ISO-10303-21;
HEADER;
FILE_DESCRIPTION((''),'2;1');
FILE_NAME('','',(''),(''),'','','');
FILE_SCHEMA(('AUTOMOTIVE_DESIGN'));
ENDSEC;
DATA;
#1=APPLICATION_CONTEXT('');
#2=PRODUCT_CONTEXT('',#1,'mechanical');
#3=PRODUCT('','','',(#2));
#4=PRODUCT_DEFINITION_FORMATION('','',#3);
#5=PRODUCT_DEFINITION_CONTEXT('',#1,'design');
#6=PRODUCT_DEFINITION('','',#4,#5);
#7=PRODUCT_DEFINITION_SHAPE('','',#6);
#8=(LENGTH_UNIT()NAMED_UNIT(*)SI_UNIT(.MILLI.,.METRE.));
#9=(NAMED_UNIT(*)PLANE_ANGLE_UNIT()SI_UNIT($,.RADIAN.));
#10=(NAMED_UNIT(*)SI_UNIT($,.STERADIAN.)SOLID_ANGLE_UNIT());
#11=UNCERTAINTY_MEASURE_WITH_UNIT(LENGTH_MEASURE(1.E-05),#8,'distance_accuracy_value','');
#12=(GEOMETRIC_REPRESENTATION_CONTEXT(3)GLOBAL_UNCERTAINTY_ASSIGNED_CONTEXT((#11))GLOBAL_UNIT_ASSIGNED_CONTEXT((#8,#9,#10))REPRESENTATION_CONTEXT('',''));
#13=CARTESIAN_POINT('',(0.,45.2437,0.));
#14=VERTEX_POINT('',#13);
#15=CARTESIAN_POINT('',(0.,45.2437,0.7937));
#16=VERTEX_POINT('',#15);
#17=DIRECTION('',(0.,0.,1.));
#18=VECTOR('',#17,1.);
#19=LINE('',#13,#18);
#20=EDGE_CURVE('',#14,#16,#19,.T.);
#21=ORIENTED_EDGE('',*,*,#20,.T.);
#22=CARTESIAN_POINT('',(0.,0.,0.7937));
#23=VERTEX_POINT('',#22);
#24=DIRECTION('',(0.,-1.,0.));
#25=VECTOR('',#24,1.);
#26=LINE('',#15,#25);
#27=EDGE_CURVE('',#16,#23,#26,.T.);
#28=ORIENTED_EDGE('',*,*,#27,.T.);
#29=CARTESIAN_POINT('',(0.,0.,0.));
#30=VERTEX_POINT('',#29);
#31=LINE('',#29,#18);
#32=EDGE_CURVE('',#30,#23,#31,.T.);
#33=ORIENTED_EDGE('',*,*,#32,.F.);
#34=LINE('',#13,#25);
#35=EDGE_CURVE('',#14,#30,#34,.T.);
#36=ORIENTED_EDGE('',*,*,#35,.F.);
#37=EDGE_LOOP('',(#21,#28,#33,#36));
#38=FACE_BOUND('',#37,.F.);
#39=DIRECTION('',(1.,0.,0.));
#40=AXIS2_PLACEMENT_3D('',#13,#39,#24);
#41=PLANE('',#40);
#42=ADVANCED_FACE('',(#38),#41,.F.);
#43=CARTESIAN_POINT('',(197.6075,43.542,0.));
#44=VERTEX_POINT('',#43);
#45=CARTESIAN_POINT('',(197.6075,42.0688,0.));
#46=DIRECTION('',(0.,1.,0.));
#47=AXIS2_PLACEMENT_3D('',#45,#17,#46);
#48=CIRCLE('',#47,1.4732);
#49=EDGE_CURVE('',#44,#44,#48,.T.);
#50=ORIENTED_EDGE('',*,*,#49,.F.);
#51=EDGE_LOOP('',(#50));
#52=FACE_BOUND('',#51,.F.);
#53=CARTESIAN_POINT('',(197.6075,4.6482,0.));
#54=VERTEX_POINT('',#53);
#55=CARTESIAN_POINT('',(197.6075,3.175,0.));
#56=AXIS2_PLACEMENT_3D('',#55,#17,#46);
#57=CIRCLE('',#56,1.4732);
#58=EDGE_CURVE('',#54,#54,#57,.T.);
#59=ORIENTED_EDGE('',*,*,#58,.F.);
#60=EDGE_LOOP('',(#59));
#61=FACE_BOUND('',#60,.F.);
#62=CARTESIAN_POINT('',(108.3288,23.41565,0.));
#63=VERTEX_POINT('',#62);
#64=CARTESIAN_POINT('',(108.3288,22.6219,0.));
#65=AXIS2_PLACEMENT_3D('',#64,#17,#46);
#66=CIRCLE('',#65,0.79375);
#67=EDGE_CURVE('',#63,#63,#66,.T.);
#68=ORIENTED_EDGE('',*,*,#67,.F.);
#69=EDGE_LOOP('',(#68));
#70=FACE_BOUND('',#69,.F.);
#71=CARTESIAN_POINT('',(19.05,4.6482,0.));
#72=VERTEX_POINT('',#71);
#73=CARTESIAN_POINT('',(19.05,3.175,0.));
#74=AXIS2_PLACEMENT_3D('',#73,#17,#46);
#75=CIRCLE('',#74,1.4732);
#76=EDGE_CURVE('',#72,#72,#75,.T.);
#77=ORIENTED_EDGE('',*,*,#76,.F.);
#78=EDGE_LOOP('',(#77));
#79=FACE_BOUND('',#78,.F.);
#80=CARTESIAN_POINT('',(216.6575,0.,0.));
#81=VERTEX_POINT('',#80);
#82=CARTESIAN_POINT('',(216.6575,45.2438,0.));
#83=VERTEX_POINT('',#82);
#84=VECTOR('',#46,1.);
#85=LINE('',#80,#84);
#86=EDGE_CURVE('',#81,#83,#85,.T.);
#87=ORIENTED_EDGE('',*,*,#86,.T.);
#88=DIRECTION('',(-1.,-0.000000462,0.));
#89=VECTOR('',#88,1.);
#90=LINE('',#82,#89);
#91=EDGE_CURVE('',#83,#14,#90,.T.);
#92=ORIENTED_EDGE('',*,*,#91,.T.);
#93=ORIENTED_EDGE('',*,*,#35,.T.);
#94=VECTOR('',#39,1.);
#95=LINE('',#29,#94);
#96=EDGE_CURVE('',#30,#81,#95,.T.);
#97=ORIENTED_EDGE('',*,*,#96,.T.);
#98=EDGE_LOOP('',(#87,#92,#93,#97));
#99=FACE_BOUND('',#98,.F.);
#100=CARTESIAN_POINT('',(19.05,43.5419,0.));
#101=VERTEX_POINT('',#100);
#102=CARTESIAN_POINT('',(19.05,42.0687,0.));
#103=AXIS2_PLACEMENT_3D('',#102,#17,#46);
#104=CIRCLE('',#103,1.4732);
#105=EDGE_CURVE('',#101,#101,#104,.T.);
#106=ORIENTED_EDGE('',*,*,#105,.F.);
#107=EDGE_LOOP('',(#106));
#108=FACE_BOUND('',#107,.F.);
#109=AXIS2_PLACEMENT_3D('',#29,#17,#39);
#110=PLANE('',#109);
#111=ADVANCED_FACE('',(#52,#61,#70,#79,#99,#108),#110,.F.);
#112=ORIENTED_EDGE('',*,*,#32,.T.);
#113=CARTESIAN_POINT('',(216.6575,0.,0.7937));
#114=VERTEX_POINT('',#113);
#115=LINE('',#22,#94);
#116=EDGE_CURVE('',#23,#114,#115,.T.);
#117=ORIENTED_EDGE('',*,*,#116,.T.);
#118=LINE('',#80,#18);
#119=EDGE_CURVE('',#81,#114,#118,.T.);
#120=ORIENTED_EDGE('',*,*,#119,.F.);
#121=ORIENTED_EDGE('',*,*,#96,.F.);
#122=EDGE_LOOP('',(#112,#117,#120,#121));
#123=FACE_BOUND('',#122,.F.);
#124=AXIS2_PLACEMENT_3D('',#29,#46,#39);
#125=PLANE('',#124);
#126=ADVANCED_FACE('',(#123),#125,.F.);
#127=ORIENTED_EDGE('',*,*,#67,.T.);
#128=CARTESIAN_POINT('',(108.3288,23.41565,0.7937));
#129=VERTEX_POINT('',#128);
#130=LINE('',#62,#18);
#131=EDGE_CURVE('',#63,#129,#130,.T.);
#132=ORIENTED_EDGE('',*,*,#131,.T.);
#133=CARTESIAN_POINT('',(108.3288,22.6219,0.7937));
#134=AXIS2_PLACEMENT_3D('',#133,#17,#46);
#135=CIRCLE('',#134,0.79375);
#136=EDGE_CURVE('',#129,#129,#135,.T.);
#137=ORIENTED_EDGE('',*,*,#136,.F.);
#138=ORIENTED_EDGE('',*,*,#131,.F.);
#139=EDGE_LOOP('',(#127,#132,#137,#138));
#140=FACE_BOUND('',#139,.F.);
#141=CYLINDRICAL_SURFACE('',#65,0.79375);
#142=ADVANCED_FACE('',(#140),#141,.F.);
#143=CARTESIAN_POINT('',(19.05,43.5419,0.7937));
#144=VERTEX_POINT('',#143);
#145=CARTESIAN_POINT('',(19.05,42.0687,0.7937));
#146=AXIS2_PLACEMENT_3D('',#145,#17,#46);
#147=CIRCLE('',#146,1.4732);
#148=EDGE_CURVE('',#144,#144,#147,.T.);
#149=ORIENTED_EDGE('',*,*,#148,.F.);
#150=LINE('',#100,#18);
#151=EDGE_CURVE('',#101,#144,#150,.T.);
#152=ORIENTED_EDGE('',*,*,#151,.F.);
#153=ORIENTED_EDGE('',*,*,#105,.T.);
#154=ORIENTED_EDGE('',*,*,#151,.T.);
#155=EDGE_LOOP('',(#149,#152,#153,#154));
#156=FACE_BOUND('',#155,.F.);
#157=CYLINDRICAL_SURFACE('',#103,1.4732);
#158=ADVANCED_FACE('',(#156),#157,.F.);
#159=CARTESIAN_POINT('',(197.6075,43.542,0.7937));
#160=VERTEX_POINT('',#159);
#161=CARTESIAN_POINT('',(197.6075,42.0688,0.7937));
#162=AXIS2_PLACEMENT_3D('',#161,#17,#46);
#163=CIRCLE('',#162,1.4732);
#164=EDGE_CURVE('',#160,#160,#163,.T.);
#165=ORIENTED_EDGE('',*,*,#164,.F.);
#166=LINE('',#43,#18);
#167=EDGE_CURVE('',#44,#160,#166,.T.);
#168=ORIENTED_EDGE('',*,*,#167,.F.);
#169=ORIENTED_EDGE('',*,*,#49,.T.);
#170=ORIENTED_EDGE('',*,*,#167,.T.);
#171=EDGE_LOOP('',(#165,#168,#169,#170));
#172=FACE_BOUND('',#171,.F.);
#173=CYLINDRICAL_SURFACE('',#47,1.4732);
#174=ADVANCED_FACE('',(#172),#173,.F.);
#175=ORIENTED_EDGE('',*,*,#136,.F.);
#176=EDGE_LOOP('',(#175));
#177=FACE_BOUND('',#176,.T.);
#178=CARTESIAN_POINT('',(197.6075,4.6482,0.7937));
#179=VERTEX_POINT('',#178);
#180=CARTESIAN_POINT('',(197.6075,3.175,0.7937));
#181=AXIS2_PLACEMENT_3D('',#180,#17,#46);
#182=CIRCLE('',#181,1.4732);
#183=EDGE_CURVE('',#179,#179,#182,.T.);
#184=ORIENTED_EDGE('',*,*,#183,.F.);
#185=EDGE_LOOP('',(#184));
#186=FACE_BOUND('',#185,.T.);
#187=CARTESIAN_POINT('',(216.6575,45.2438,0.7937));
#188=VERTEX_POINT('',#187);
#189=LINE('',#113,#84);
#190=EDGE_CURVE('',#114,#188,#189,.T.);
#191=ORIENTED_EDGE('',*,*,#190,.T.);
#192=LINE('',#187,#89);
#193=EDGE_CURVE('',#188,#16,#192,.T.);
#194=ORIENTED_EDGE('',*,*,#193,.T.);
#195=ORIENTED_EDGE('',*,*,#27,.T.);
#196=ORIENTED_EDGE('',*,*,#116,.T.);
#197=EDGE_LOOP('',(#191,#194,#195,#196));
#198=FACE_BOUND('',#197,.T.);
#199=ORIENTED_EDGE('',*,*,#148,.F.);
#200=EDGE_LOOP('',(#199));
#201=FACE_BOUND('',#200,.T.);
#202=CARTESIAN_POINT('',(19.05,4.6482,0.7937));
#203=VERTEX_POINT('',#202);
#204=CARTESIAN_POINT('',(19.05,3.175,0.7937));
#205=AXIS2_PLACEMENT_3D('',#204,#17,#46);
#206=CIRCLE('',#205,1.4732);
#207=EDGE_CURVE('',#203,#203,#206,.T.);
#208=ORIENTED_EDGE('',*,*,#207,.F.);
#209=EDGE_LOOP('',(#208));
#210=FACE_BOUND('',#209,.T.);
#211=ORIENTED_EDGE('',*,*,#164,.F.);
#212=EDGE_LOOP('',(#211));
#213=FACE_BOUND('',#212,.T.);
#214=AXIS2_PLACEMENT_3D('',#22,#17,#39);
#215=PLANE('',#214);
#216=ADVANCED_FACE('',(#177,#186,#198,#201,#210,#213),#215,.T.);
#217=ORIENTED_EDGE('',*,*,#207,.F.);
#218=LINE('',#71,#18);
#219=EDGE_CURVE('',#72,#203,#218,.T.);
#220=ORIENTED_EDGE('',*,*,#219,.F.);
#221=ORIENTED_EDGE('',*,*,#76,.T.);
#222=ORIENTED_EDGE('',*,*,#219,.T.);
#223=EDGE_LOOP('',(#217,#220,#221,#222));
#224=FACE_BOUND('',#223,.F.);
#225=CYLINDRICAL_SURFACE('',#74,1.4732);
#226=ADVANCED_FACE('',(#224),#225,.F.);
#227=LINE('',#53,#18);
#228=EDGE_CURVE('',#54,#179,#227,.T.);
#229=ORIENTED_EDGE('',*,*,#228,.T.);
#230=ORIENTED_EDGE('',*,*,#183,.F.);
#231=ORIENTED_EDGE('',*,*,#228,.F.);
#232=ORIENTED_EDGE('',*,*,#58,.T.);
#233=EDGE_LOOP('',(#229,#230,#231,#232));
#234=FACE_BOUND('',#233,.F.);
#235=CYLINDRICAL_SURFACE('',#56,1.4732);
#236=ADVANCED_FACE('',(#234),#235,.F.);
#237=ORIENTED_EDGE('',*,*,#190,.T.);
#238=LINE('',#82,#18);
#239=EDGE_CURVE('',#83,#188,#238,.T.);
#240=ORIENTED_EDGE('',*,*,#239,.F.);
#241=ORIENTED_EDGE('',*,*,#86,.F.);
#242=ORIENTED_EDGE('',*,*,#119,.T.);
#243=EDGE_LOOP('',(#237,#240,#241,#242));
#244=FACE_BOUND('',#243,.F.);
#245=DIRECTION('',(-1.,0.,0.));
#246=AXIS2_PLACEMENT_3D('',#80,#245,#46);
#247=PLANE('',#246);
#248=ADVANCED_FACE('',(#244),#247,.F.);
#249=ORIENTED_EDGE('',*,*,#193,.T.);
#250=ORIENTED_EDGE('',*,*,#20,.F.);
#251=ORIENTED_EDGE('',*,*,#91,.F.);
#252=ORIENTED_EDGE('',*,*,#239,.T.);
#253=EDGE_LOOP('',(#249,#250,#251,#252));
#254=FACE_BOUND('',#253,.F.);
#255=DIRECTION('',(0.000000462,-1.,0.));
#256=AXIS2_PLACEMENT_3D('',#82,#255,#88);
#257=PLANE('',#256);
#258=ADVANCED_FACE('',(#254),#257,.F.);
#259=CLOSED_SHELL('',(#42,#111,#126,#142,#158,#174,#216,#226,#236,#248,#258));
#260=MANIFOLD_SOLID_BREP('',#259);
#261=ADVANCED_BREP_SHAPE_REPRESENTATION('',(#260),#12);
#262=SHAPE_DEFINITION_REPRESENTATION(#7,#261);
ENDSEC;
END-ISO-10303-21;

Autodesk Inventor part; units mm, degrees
ref_plane "YZ Plane" through (0, 0, 0) normal (1, 0, 0) x (0, 1, 0)
ref_plane "XZ Plane" through (0, 0, 0) normal (0, 1, 0) x (-1, 0, 0)
ref_plane "XY Plane" through (0, 0, 0) normal (0, 0, 1) x (1, 0, 0)
sketch "Sketch1" plane through (0, 0, 0) normal (0, 0, 1) x (1, 0, 0)
  line L0 (0, 0) -> (216.6575, 0)
  line L1 (216.6575, 0) -> (216.6575, 45.2438)
  line L2 (216.6575, 45.2438) -> (0, 45.2437)
  line L3 (0, 45.2437) -> (0, 0)
  dimension "d0" = 216.6575
  dimension "d1" = 45.2437
extrude "Plate1" add sketch "Sketch1" along normal blind 0.7937
sketch "Sketch2" plane through (0, 0, 0) normal (0, 0, -1) x (-1, 0, 0)
  line L0 (0, 0) -> (-216.6575, 0) projected
  line L1 (0, 45.2437) -> (0, 0) projected
  line L2 (-216.6575, 45.2438) -> (0, 45.2437) projected
  line L3 (-216.6575, 0) -> (-216.6575, 45.2438) projected
  line L4 (-197.6075, 45.2438) -> (-197.6075, 0) construction
  line L5 (-216.6575, 3.175) -> (0, 3.175) construction
  line L6 (-19.05, 0) -> (-19.05, 45.2437) construction
  line L7 (0, 42.0687) -> (-216.6575, 42.0688) construction
  point P0 (-197.6075, 42.0688)
  point P1 (-197.6075, 3.175)
  point P2 (-19.05, 3.175)
  point P3 (-19.05, 42.0687)
  point P4 (-108.3288, 22.6219)
  dimension "d3" = 3.175
  dimension "d4" = 3.175
  dimension "d5" = 19.05
  dimension "d6" = 19.05
  dimension "d7" = 22.6219
  dimension "d8" = 108.3288
  dimension "d9" = 45.2437
  dimension "d10" = 216.6575
hole "Hole1" at (197.6075, 42.0688, 0) at (197.6075, 3.175, 0) at (19.05, 3.175, 0) at (19.05, 42.0687, 0) direction (0, 0, 1) diameter 2.9464 end through all clearance for "Flat Head Machine Screw (82)" size "#4" standard "Ansi Unified Screw Threads"
hole "Hole2" at (108.3288, 22.6219, 0) direction (0, 0, 1) diameter 1.5875 end through all
equation "\"d4\" = d3"
equation "\"d6\" = d5"
equation "\"d7\" = 0.5 * d9"
equation "\"d8\" = 0.5 * d10"
equation "\"d16\" = Thickness"
equation "\"d23\" = Thickness"
equation "\"BendRadius\" = Thickness"
equation "\"BendReliefWidth\" = Thickness"
equation "\"BendReliefDepth\" = 0.5 * Thickness"
equation "\"CornerReliefSize\" = 4 * Thickness"
equation "\"MinimumRemnant\" = 2 * Thickness"
equation "\"TransitionRadius\" = BendRadius"
equation "\"JacobiRadiusSize\" = BendRadius"
equation "\"GapSize\" = Thickness"
equation "\"d2\" = BendRadius"
equation "\"Thickness\" = 0.79375"
properties part number "Sheild Flat" material "Aluminum 6061"
